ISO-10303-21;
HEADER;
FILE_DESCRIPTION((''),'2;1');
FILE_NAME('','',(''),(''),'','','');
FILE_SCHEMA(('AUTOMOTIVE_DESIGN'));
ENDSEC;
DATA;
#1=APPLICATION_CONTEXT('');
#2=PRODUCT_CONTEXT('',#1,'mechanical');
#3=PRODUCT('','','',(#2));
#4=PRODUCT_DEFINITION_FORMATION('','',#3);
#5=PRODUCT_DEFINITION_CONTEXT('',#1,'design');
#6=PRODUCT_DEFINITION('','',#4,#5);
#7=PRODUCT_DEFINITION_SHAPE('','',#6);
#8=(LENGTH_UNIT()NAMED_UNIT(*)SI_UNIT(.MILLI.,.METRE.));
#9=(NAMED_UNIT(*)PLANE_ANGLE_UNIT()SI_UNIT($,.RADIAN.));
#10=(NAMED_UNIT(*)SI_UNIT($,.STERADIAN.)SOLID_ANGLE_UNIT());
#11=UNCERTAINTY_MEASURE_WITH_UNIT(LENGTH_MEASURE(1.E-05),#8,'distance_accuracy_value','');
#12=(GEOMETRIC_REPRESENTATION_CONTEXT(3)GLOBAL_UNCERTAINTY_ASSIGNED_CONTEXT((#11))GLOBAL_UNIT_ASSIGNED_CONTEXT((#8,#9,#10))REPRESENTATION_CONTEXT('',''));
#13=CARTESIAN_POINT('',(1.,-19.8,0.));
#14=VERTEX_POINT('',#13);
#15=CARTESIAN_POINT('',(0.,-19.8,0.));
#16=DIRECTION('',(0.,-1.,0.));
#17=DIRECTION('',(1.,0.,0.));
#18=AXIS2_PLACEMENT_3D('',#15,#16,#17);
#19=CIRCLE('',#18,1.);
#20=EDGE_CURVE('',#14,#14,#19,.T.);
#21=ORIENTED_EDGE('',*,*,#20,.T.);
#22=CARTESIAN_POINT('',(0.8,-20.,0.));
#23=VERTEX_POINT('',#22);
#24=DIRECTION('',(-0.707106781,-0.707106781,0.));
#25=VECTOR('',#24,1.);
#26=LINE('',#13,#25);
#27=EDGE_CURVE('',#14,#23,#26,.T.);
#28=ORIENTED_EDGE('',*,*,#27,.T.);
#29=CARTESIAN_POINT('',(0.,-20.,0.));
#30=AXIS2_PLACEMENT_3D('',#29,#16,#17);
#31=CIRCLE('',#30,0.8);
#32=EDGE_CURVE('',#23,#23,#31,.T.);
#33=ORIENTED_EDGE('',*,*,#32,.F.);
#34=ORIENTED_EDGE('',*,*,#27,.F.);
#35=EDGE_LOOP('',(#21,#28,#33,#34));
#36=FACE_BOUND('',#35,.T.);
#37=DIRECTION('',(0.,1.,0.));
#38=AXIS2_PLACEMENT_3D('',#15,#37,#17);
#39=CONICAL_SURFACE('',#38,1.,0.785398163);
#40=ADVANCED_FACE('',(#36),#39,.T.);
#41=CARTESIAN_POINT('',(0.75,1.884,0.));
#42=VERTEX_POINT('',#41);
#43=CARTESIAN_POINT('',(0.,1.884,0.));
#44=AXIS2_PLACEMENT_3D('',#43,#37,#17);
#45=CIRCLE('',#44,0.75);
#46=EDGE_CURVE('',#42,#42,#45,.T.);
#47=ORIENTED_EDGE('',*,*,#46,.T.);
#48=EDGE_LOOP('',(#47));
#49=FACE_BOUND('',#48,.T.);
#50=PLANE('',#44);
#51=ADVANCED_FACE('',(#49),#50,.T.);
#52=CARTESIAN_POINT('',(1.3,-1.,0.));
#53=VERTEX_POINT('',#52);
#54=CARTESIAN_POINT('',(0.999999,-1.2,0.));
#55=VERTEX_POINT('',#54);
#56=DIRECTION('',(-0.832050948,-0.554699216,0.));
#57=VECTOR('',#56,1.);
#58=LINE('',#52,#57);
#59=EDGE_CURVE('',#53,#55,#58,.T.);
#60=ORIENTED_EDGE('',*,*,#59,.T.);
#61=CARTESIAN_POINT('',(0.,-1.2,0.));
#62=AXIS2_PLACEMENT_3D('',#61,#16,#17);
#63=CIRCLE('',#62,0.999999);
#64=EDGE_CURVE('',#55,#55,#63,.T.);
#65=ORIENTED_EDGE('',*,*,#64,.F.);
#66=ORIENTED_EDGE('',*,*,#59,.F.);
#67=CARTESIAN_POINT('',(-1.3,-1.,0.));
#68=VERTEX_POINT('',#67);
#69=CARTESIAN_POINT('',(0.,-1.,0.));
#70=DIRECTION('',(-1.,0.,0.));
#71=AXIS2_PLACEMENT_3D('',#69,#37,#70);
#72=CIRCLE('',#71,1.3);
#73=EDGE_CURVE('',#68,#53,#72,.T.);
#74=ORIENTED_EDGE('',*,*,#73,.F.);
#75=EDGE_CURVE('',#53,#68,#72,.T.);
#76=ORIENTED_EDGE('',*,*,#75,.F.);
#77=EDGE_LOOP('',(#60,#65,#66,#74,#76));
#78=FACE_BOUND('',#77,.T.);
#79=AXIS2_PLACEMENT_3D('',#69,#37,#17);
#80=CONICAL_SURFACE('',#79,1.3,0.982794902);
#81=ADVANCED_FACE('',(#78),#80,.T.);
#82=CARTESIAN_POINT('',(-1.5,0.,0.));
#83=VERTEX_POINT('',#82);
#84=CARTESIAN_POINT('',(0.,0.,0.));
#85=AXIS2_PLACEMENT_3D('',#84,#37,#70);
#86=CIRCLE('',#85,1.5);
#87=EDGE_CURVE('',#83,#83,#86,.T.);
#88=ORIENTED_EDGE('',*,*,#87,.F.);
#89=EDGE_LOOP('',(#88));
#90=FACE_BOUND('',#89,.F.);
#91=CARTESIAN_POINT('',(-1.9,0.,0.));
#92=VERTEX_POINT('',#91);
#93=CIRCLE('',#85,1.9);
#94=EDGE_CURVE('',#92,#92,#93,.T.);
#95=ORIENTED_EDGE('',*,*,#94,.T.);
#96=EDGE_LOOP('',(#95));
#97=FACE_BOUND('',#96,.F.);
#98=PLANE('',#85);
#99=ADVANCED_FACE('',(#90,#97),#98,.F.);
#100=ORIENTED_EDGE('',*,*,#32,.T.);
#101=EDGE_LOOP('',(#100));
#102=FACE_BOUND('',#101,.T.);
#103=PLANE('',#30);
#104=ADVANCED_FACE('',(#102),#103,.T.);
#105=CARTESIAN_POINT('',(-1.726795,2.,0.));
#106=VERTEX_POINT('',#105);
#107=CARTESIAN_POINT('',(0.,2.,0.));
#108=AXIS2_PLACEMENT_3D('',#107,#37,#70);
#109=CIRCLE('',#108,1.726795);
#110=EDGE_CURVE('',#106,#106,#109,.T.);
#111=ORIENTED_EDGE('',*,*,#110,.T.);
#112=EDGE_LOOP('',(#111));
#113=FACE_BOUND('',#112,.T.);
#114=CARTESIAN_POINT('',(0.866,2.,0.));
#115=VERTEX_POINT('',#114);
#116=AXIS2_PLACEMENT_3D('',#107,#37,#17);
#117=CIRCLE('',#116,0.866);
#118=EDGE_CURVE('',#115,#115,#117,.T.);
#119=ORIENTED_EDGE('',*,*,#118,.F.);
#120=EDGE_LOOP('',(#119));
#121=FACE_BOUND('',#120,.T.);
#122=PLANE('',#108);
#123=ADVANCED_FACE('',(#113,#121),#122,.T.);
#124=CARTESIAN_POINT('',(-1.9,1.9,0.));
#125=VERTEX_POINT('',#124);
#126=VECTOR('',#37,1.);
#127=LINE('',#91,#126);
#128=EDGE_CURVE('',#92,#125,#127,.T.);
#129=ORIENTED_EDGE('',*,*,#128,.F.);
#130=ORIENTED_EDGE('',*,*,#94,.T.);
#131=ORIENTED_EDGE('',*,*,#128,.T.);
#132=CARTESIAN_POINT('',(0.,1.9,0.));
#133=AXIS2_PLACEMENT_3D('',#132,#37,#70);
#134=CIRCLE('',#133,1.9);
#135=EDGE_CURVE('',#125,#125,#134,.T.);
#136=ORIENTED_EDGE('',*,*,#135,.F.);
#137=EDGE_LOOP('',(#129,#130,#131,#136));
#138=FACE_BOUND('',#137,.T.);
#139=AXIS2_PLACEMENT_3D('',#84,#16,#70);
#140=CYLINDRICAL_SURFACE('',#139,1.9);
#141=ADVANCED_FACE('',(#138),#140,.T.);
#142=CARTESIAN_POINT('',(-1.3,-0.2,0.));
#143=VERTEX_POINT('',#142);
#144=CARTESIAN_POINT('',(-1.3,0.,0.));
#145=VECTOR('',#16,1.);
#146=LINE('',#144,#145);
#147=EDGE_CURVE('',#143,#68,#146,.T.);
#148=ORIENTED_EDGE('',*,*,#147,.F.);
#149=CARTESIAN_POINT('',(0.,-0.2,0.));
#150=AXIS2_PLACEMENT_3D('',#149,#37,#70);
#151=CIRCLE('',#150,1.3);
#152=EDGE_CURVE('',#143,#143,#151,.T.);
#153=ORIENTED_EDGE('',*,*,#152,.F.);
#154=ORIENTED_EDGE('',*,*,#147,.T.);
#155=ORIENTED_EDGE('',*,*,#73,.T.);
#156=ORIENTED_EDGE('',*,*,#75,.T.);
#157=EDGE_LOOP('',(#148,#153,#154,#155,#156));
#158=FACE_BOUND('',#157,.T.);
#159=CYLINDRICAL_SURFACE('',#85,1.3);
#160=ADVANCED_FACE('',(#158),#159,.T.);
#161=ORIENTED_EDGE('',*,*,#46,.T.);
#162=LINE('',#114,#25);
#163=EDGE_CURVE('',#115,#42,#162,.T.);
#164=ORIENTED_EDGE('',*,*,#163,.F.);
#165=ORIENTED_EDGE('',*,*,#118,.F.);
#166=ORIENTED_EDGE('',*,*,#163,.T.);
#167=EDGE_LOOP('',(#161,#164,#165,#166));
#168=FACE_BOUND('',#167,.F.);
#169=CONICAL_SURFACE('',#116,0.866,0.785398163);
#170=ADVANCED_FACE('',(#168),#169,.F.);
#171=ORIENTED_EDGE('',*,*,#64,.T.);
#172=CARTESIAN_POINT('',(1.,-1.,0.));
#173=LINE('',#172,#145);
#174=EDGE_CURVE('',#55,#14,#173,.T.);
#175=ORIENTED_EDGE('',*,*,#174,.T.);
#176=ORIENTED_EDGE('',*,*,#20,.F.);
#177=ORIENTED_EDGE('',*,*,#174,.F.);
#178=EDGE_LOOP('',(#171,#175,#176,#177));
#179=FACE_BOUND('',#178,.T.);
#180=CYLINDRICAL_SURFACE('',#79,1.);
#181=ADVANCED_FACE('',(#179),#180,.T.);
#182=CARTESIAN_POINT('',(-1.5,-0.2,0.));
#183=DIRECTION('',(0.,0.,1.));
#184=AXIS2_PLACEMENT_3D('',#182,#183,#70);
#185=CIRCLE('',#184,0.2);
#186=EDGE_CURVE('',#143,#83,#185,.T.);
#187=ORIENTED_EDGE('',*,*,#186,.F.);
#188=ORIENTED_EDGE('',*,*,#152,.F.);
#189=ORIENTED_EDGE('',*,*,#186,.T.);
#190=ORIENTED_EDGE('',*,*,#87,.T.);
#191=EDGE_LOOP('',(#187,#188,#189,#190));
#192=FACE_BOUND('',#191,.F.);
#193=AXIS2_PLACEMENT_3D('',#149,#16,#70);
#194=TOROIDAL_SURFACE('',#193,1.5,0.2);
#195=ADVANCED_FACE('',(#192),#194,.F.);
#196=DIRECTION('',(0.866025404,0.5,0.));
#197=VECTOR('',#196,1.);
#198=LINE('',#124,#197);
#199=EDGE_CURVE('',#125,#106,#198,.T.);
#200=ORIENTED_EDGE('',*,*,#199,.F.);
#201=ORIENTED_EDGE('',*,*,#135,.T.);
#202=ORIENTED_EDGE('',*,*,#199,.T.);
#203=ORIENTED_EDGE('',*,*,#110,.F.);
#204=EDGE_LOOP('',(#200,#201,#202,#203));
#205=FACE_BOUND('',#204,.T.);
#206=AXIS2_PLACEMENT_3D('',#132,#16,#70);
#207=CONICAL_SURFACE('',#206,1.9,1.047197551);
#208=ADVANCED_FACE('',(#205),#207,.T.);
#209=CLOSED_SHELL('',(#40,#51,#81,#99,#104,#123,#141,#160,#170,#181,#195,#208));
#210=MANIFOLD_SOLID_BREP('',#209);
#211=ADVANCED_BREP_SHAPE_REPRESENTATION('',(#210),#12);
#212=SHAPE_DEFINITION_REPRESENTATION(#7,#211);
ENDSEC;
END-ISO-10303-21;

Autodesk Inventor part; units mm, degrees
ref_plane "YZ Plane" through (0, 0, 0) normal (1, 0, 0) x (0, 1, 0)
sketch "Sketch11" plane through (0, 0, 0) normal (0, 1, 0) x (-1, 0, 0)
  circle A0 centre (0, 0) radius 1.9
  dimension "d86" = 3.8
sketch "Sketch12" plane through (0, 0, 0) normal (0, 1, 0) x (-1, 0, 0)
  circle A0 centre (0, 0) radius 1.3
  dimension "d87" = 2.6
ref_plane "Work Plane4" through (0, 2, 0) normal (0, 1, 0) x (-1, 0, 0)
ref_plane "Work Plane5" through (0, 1.9, 0) normal (0, 1, 0) x (-1, 0, 0)
extrude "Head" add sketch "Sketch11" along normal blind 2
chamfer "Chamfer3" distance 0.1 angle 60 1 edges at (1.9, 2, 0) measured on face at (-1.8938, 1.3333, -0.1529)
sketch "Sketch6" plane through (0, 1.9, 0) normal (0, 1, 0) x (1, 0, 0)
  line L0 (0, 0) -> (-1.9, 0) construction
  line L1 (0, 0) -> (-2, 0) construction
  line L2 (-2, 0) -> (-2, 0.2)
  line L3 (-2, 0) -> (-2, -0.2)
  line L4 (-2, -0.2) -> (-1.8894, -0.2)
  line L5 (-2, 0.2) -> (-1.8894, 0.2)
  line L6 (-1.8894, -0.2) -> (-1.8894, 0.2)
  circle A0 centre (0, 0) radius 1.9 construction
  dimension "d34" = 1.9
  dimension "d35" = 2
  dimension "d36" = 0.2
  dimension "d37" = 0.2
  dimension "d40" = 0.1106
  dimension "d75" = 3.8
extrude "Grip Knurling" [suppressed]
fillet "Fillet3" [suppressed]
pattern_circular "Circular Pattern1" [suppressed]
pattern_circular "Circular Pattern2" [suppressed]
sketch "Label" plane through (0, 2, 0) normal (0, 1, 0) x (-1, 0, 0)
  circle A0 centre (0, 0) radius 0.866
  circle A1 centre (0, 0) radius 1.7268 projected
  dimension "shaftDiameter" = 2
  dimension "transitionDiameter" = 2.6
  dimension "d109" = 1.7321
feature "Bolt Designation" [suppressed]
sketch "Sketch2" plane through (0, 2, 0) normal (0, 1, 0) x (1, 0, 0)
  line L0 (0.75, -0.433) -> (0, -0.866)
  line L1 (0, -0.866) -> (-0.75, -0.433)
  line L2 (-0.75, -0.433) -> (-0.75, 0.433)
  line L3 (-0.75, 0.433) -> (0, 0.866)
  line L4 (0, 0.866) -> (0.75, 0.433)
  line L5 (0.75, 0.433) -> (0.75, -0.433)
  line L6 (-0.75, -0.433) -> (0.75, 0.433) construction
  point P0 (0, 0)
  point P1 (0, 0)
  dimension "d8" = 1.5
  dimension "d24" = 1.7321
  dimension "d85" = 0.866
extrude "HexagonSocket" [suppressed]
sketch "Sketch4" plane through (0, 2, 0) normal (0, 1, 0) x (1, 0, 0)
  circle A0 centre (0, 0) radius 0.866
  dimension "d25" = 1.7321
extrude "Socket_topTaper" cut sketch "Sketch4" against normal blind 0.116 draft -45
ref_plane "Work Plane8" through (0, 0.8, 0) normal (0, 1, 0) x (1, 0, 0)
sketch "Sketch10" plane through (0, 0.8, 0) normal (0, 1, 0) x (1, 0, 0)
  circle A0 centre (0, 0) radius 0.433
  dimension "d70" = 0.866
feature "Socket_bottomTaper" [suppressed]
extrude "Transition" add sketch "Sketch12" against normal blind 1
ref_plane "Work Plane9" through (0, -1, 0) normal (0, 1, 0) x (-1, 0, 0)
sketch "Sketch18" plane through (0, -1, 0) normal (0, -1, 0) x (1, 0, 0)
  circle A0 centre (0, 0) radius 1.3 projected
extrude "Extruded Angle" add sketch "Sketch18" along normal blind 0.2 draft -56.31
sketch "Sketch19" plane through (0, -1.2, 0) normal (0, -1, 0) x (1, 0, 0)
  circle A0 centre (0, 0) radius 1 projected
sketch "Sketch13" plane through (0, -1, 0) normal (0, -1, 0) x (1, 0, 0)
  circle A0 centre (0, 0) radius 1
  dimension "d92" = 2
extrude "Shaft" add sketch "Sketch13" along normal blind 19
fillet "Fillet4" radius 0.2 1 edges at (1.3, 0, 0)
chamfer "Chamfer4" distance 0.2 angle 45 1 edges at (-1, -20, 0)
thread "Thread1" size "M2x0.4" class "6g" standard "ISO Metric profile" full length
sketch "Sketch7" plane through (0, 0, 0) normal (0, 0, 1) x (1, 0, 0)
  line L0 (-1, 0.2) -> (1, 0.2) construction
  line L1 (-1, -20.4) -> (-0.7393, -20.5505)
  line L2 (-0.7393, -20.6495) -> (-1, -20.8)
  line L3 (-1, -20.8) -> (-1, -20.4)
  arc A0 (-0.7393, -20.6495) -> (-0.7393, -20.5505) centre (-0.7679, -20.6) ccw
  line L4 (-1, -19.8) -> (1, -19.8) projected
  point P0 (0, 0)
  point P1 (-0.8845, -20.6)
  point P2 (-0.6536, -20.6)
  dimension "d53" = 0.4
  dimension "d56" = 0.0571
  dimension "d124" = 0.6
  dimension "d125" = 0
feature "ModeledThreads" [suppressed]
extrude "Extrusion10" add sketch "Sketch19" against normal blind 1
equation "\"shaftDiameter\" = 2"
equation "\"transitionDiameter\" = 2.6"
equation "\"flangeCoupling_height\" = flangeCoupling_collarHeight + flangeCoupling_flangeHeight"
equation "\"headHeight\" = 2"
equation "\"headDiameter\" = 3.8"
equation "\"gap\" = 0.1"
equation "\"airgap\" = 0.4"
equation "\"wallgap\" = 2"
equation "\"printingLayerHeight\" = 0.2"
equation "\"driveMagnet_height\" = 5"
equation "\"halbachMagnet_height\" = 3"
equation "\"rotorBandBolt_diameter\" = 2"
equation "\"rotorBandBolt_headDiameter\" = 3.98"
equation "\"rotorBandBolt_headHeight\" = 2"
equation "\"rotorBandHexNut_sideToSide\" = 4"
equation "\"rotorBandHexNut_height\" = 1.2"
equation "\"rotorBandSquareNut_sideLength\" = 4"
equation "\"rotorBandSquareNut_height\" = 1.2"
equation "\"sensorMagnet_diameter\" = 5"
equation "\"sensorMagnet_height\" = 2.66667"
equation "\"sensorMagnet_ringRadius\" = 0.5 * driveMagnet_centerSpacingRadius + 2 * wallgap"
equation "\"rotorRadius\" = 2 * gap + driveMagnet_centerSpacingRadius + driveMagnet_length + wallgap"
equation "\"rotor_mountingLipHeight\" = 0.5 * statorThickness"
equation "\"flangeBearing_innerDiameter\" = shaftDiameter"
equation "\"flangeBearing_outerDiameter\" = 16"
equation "\"flangeBearing_flangeDiameter\" = 18"
equation "\"flangeBearing_height\" = 5"
equation "\"flangeBearing_flangeHeight\" = 1"
equation "\"magnetWire_outerDiameter\" = 0.8128"
equation "\"coilThickness\" = 12"
equation "\"statorThickness\" = coilThickness + 2 * wallgap"
equation "\"rotorBandThickness\" = wallgap + rotorBandBolt_headHeight + gap"
equation "\"flangeCoupling_innerDiameter\" = shaftDiameter"
equation "\"flangeCoupling_collarOuterDiameter\" = 16"
equation "\"flangeCoupling_flangeDiameter\" = 32"
equation "\"flangeCoupling_flangeHeight\" = 3.1"
equation "\"flangeCoupling_mountHoleDiameter\" = 3.9"
equation "\"flangeCoupling_mountHoleEdgeToEdge\" = 2.05"
equation "\"statorRadius\" = driveMagnet_length + driveMagnet_centerSpacingRadius + 2 * gap"
equation "\"statorMountBolt_diameter\" = 4"
equation "\"statorMountBolt_headDiameter\" = 7"
equation "\"statorMountBolt_headHeight\" = 4"
equation "\"statorMountBolt_shaftLength\" = coilThickness + flangeCoupling_flangeHeight + wallgap"
equation "\"statorMountHexNut_sideToSide\" = 8"
equation "\"statorMountHexNut_height\" = 4"
equation "\"coil_percentCoverage\" = 0.6"
equation "\"statorSpokeDegrees\" = 4deg"
equation "\"statorCoilBolt_diameter\" = 2"
equation "\"statorCoilBolt_headDiameter\" = 3.98"
equation "\"statorCoilBolt_headHeight\" = 2"
equation "\"statorCoilBolt_shaftLength\" = coilThickness"
equation "\"statorCoilHexNut_sideToSide\" = 4"
equation "\"statorCoilHexNut_height\" = 1.2"
equation "\"circuitBoard_height\" = 1.6"
equation "\"hallEffectSensor_height\" = 1.1"
equation "\"hallEffectSensor_length\" = 3"
equation "\"hallEffectSensor_width\" = 1.6"
equation "\"hallEffectSensor_pinLength\" = 0.6"
equation "\"circuitboardMountBolt_diameter\" = 2"
equation "\"circuitboardMountBolt_headDiameter\" = 3.98"
equation "\"circuitboardMountBolt_headHeight\" = 2"
equation "\"circuitboardMountBolt_shaftLength\" = coilThickness"
equation "\"circuitboardMountHexNut_sideToSide\" = 4"
equation "\"circuitboardMountHexNut_height\" = 1.2"
equation "\"statorShellBolt_diameter\" = 3"
equation "\"statorShellBolt_headDiameter\" = 5.68"
equation "\"statorShellBolt_headHeight\" = 3"
equation "\"statorShellBolt_shaftLength\" = statorThickness - statorShellBolt_countersinkDepth"
equation "\"statorShellHexNut_sideToSide\" = 5.3"
equation "\"statorShellHexNut_height\" = 2.3"
equation "\"threadPitch\" = 0.4"
equation "\"socketSize\" = 1.5"
equation "\"chamferSize\" = 0.2"
equation "\"keyEngagementDepth\" = 1"
equation "\"transitionLength\" = 1"
equation "\"textSize\" = 0.95"
equation "\"flangeCoupling_collarHeight\" = 10"
equation "\"driveMagnet_centerSpacingRadius\" = 38.96113"
equation "\"driveMagnet_length\" = 60"
equation "\"statorShellBolt_countersinkDepth\" = 3.4"
properties part number "M2" material "Steel, Galvanized"
